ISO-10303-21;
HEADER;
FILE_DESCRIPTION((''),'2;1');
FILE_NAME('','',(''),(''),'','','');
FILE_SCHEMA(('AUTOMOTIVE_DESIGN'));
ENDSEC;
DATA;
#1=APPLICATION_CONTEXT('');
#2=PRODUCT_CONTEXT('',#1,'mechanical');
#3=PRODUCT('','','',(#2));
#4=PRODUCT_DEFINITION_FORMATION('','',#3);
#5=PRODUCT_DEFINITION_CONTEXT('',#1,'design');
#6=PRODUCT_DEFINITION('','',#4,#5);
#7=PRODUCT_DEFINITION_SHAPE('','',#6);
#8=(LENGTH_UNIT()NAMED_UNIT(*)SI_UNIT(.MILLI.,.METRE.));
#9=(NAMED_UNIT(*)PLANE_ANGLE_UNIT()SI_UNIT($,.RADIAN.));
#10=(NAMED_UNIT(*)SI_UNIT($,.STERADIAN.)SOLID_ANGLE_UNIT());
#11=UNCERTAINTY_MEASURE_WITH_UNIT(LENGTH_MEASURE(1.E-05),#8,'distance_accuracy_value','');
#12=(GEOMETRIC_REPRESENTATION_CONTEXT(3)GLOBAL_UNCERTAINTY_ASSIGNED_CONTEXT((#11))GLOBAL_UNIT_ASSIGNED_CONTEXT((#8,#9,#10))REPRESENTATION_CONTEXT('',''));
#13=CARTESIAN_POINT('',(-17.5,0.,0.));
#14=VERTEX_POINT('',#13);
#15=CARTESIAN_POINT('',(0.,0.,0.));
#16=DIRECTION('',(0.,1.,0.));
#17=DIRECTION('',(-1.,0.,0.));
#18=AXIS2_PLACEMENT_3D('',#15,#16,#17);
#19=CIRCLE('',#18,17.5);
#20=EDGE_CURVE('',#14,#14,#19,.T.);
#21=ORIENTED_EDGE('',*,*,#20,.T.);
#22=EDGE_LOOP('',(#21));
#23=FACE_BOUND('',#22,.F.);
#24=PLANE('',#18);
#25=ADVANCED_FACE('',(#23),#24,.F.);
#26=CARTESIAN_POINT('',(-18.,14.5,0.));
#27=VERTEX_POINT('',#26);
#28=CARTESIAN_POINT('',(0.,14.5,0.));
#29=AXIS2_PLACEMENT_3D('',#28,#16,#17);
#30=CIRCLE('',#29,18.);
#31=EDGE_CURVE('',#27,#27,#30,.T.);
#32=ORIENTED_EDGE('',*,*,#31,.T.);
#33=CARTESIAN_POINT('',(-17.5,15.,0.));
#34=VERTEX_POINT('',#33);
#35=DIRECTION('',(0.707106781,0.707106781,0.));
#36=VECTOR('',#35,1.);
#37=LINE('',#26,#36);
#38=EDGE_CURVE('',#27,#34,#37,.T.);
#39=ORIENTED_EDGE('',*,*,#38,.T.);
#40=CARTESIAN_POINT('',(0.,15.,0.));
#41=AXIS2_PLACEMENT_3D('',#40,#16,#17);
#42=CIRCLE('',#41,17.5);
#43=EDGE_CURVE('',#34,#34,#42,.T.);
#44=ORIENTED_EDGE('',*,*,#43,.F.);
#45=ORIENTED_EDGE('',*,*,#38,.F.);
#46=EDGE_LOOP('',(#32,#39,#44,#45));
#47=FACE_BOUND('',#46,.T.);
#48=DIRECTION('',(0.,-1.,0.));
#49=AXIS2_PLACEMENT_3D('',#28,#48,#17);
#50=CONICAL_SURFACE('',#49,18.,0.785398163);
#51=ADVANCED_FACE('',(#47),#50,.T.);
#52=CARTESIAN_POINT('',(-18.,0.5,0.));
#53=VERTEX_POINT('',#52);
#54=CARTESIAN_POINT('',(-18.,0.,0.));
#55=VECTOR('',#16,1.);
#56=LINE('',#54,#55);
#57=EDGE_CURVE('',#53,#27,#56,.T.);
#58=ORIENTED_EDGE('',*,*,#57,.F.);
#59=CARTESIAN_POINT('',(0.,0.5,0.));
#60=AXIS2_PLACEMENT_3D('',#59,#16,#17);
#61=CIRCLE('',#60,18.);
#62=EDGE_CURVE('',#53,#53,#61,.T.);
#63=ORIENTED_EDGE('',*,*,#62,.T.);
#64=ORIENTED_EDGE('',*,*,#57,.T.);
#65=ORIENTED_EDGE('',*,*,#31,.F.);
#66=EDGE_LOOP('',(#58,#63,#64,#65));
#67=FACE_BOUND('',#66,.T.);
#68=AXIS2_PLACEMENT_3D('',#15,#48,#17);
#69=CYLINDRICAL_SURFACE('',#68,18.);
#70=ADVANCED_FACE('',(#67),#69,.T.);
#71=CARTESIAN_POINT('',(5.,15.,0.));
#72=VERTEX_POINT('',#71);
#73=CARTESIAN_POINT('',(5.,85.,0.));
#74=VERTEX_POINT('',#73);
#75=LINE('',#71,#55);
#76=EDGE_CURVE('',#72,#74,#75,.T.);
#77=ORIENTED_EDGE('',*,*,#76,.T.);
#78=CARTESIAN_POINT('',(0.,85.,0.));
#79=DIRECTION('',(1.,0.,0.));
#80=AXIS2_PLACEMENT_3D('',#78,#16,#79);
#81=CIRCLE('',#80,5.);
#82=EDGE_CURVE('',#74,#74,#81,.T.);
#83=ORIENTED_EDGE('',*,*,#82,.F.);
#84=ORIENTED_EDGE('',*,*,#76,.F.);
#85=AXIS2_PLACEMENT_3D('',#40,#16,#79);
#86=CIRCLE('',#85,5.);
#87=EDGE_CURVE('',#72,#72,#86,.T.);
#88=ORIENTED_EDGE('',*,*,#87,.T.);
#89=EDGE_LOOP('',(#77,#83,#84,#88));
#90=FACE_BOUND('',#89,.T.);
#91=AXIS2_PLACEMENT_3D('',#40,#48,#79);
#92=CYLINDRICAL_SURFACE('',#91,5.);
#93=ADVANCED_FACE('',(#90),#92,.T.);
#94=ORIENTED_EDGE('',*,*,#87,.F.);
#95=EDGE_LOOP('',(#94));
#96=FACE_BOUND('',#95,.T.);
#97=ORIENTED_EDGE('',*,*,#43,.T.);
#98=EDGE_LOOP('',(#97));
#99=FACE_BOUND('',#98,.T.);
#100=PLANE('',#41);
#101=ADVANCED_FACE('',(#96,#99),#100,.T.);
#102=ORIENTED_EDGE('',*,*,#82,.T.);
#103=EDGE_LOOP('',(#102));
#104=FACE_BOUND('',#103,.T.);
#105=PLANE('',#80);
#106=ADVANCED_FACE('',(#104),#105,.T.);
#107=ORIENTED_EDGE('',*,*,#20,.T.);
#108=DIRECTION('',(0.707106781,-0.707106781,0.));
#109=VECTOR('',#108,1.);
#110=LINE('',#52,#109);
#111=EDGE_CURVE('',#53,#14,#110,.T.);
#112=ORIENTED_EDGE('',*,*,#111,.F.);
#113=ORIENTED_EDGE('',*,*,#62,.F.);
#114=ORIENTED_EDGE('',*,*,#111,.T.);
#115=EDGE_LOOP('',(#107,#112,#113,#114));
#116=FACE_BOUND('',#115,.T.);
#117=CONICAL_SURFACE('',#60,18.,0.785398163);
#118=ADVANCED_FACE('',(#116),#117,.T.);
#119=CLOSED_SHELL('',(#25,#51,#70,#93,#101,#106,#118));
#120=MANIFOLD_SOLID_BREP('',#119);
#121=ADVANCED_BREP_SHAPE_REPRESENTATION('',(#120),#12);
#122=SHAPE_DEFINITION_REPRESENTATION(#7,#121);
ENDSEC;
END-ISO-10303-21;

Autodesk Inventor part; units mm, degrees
ref_plane "YZ Plane" through (0, 0, 0) normal (1, 0, 0) x (0, 1, 0)
ref_plane "XZ Plane" through (0, 0, 0) normal (0, 1, 0) x (-1, 0, 0)
ref_plane "XY Plane" through (0, 0, 0) normal (0, 0, 1) x (1, 0, 0)
sketch "Esboço1" plane through (0, 0, 0) normal (0, 1, 0) x (-1, 0, 0)
  circle A0 centre (0, 0) radius 18
  dimension "d0" = 36
extrude "Extrusão1" add sketch "Esboço1" along normal blind 15
sketch "Esboço2" plane through (0, 15, 0) normal (0, 1, 0) x (1, 0, 0)
  circle A0 centre (0, 0) radius 5
  dimension "d3" = 10
extrude "Extrusão2" add sketch "Esboço2" along normal blind 70
thread "Rosca1" size "M10x1.5" class "6g" standard "ANSI Metric M Profile" length 15 offset 55
chamfer "Chamfer1" distance 0.5 angle 45 1 edges at (18, 0, 0)
chamfer "Chamfer2" distance 0.5 angle 45 1 edges at (18, 15, 0)
equation "\"Raio_vergadura\" = Espessura"
equation "\"Largura_alívio_de_vergadura\" = Espessura"
equation "\"Profundidade_alívio_de_vergadura\" = 0.5 * Espessura"
equation "\"Tamanho_alívio_de_dobra\" = 4 * Espessura"
equation "\"Remanescente_mínimo\" = 2 * Espessura"
equation "\"Raiodetransição\" = Raio_vergadura"
equation "\"Tamanho_de_raio_de_Jacobi\" = Raio_vergadura"
equation "\"TamanhoFolga\" = Espessura"
equation "\"Espessura\" = 0.5"
properties part number "Probe" material "Aluminum 6061"
